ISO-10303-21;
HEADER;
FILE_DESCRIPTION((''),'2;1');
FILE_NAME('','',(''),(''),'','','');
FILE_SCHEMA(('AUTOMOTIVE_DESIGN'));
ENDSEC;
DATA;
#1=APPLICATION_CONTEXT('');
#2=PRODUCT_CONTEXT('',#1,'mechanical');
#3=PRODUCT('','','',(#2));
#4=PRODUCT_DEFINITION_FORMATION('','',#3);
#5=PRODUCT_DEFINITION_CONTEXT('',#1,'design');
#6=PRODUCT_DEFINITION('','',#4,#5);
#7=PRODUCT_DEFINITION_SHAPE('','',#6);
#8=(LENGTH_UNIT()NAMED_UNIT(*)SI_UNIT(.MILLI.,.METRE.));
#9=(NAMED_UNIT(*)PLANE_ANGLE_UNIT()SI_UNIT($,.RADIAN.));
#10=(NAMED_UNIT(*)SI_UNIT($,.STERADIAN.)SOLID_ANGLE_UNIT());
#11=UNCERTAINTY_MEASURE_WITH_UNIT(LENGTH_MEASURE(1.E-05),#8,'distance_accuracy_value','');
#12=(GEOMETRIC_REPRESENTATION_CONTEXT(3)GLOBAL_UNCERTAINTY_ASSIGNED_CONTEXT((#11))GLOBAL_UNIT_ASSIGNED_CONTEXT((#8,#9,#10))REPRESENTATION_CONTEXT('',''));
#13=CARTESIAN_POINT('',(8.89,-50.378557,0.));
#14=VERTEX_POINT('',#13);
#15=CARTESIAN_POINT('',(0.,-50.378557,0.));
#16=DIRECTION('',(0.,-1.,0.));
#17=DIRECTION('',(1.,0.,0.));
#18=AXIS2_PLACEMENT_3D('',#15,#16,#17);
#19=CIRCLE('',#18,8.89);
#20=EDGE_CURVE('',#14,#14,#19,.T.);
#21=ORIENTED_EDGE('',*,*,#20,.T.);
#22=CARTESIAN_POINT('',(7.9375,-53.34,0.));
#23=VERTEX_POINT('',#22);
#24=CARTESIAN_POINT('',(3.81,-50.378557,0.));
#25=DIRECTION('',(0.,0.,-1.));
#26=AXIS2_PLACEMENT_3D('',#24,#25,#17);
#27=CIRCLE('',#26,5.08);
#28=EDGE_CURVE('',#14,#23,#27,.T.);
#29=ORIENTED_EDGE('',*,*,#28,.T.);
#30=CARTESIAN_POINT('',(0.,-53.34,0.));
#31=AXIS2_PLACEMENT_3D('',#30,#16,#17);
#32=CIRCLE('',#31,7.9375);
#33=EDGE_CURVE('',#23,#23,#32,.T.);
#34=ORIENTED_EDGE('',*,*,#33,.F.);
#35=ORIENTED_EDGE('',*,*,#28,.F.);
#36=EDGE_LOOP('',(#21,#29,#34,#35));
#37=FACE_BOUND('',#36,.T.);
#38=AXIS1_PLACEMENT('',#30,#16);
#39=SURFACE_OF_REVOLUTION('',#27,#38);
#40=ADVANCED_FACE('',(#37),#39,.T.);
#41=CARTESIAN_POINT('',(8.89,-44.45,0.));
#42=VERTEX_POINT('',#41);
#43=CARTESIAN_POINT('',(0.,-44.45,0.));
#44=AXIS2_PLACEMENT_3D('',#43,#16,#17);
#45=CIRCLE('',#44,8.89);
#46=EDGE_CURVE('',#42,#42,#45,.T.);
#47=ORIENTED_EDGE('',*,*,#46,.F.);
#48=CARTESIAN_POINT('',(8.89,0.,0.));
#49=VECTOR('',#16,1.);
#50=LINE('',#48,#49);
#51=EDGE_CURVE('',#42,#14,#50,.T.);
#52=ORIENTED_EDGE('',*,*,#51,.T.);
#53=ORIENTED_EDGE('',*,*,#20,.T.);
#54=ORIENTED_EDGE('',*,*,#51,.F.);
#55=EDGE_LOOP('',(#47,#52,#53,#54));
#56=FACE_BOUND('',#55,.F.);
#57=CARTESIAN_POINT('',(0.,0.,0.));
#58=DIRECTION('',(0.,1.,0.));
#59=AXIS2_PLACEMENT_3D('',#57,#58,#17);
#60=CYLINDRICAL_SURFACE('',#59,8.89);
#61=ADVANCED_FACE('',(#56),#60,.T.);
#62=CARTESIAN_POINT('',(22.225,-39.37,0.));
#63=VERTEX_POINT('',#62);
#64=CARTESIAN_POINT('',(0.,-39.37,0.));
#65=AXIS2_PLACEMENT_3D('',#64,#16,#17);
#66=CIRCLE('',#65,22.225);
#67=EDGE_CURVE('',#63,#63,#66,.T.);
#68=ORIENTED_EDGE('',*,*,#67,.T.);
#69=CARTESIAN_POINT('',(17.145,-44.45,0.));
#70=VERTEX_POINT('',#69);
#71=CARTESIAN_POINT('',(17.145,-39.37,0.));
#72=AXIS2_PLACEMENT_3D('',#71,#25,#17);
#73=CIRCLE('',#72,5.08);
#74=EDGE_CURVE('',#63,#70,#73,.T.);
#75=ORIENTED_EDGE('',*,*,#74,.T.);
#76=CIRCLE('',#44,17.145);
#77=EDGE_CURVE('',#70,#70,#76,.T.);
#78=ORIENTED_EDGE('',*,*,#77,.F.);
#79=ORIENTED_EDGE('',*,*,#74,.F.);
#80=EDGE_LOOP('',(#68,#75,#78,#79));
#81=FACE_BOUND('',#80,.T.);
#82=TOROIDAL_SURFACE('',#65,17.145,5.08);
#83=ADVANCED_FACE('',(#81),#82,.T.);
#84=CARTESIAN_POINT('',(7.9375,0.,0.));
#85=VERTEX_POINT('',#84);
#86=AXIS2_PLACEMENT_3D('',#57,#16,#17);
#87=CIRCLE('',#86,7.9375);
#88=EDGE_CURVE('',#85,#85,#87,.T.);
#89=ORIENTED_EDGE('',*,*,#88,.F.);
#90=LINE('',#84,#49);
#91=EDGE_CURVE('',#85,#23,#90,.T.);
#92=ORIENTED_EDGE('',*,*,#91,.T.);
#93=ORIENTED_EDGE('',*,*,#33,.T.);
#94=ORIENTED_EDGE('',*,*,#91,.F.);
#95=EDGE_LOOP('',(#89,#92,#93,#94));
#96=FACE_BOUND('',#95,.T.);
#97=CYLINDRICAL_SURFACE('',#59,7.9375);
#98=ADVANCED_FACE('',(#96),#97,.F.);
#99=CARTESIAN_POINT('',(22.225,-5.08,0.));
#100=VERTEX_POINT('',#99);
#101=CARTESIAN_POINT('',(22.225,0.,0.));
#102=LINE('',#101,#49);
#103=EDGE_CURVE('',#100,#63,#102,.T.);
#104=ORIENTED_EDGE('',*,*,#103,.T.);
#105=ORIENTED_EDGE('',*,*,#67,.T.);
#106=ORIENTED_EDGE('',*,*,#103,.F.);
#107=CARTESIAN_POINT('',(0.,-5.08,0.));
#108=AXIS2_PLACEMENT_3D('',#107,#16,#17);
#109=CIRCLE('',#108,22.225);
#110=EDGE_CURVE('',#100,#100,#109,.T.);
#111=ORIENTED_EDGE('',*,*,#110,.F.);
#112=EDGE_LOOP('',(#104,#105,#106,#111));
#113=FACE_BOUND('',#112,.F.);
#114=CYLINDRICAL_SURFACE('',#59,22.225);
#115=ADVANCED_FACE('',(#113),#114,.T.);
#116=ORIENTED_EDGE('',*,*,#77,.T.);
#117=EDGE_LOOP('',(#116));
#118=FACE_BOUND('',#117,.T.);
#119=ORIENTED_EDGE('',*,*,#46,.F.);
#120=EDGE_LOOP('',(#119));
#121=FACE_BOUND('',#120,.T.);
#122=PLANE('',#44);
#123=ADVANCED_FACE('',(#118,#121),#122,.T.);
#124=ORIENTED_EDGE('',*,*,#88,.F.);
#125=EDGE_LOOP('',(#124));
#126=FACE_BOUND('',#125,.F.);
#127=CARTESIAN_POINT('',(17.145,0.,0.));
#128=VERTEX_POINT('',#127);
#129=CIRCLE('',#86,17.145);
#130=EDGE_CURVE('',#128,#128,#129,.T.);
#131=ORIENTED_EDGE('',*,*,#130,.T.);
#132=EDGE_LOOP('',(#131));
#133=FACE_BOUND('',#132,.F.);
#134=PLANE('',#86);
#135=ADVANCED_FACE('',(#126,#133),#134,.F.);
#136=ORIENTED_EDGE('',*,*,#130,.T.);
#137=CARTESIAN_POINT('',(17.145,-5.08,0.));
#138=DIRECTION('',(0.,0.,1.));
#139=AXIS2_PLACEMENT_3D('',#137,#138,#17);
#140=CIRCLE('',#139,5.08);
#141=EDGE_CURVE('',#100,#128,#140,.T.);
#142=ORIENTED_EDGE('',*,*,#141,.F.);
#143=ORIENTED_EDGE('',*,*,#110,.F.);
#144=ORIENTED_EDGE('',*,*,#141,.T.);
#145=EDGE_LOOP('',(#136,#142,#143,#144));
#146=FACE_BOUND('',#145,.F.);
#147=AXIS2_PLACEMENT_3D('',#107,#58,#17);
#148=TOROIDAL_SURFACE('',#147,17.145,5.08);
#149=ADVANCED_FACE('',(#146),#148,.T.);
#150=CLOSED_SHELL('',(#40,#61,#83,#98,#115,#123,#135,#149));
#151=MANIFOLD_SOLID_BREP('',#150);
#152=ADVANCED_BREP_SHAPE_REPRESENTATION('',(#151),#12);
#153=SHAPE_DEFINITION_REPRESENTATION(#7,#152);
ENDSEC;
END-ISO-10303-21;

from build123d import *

# Parameters (mm, degrees)
F0_R     = 8.89
F0_R_2   = 7.9375
F1_DEPTH = 53.34
F0_R_3   = 22.225
F2_DEPTH = 44.45
F3_R     = 5.08
F4_R     = 5.08


# Not quite as in the source:
# - a fillet or chamfer that OpenCascade refuses, or shapes differently, is made with other operations: its cross-section is extruded or revolved along the edge and cut away or added


with BuildPart() as f1:
    # F0 (on Front) → F1 (new body)
    with BuildSketch(Plane.XZ):
        Circle(F0_R)
        Circle(F0_R_2, mode=Mode.SUBTRACT)
    extrude(amount=F1_DEPTH)

    # F0 (on Front) → F2 (join)
    with BuildSketch(Plane.XZ):
        Circle(F0_R_3)
        Circle(F0_R, mode=Mode.SUBTRACT)
    extrude(amount=F2_DEPTH)

    # F3
    f3_edges = [f1.edges().sort_by_distance(p)[0] for p in [
        (-22.225, -44.45, 0),
    ]]
    fillet(f3_edges, radius=F3_R)

    # F4
    f4_edges = [f1.edges().sort_by_distance(p)[0] for p in [
        (-22.225, 0, 0),
    ]]
    fillet(f4_edges, radius=F4_R)

    # F5: fillet of radius 5.08 on 1 edges, made by hand

    # F5_s1 → F5_t2 (revolve, cut)
    with BuildSketch(Plane.XY):
        with BuildLine():
            ThreePointArc((8.89, -50.3785571506), (8.6460159222, -51.9339831373), (7.9375, -53.34))
            Line((7.9375, -53.34), (8.89, -53.34))
            Line((8.89, -53.34), (8.89, -50.3785571506))
        make_face()
    revolve(axis=Axis((0, -53.34, 0), (0, -1, 0)), mode=Mode.SUBTRACT)


solid = f1.part
